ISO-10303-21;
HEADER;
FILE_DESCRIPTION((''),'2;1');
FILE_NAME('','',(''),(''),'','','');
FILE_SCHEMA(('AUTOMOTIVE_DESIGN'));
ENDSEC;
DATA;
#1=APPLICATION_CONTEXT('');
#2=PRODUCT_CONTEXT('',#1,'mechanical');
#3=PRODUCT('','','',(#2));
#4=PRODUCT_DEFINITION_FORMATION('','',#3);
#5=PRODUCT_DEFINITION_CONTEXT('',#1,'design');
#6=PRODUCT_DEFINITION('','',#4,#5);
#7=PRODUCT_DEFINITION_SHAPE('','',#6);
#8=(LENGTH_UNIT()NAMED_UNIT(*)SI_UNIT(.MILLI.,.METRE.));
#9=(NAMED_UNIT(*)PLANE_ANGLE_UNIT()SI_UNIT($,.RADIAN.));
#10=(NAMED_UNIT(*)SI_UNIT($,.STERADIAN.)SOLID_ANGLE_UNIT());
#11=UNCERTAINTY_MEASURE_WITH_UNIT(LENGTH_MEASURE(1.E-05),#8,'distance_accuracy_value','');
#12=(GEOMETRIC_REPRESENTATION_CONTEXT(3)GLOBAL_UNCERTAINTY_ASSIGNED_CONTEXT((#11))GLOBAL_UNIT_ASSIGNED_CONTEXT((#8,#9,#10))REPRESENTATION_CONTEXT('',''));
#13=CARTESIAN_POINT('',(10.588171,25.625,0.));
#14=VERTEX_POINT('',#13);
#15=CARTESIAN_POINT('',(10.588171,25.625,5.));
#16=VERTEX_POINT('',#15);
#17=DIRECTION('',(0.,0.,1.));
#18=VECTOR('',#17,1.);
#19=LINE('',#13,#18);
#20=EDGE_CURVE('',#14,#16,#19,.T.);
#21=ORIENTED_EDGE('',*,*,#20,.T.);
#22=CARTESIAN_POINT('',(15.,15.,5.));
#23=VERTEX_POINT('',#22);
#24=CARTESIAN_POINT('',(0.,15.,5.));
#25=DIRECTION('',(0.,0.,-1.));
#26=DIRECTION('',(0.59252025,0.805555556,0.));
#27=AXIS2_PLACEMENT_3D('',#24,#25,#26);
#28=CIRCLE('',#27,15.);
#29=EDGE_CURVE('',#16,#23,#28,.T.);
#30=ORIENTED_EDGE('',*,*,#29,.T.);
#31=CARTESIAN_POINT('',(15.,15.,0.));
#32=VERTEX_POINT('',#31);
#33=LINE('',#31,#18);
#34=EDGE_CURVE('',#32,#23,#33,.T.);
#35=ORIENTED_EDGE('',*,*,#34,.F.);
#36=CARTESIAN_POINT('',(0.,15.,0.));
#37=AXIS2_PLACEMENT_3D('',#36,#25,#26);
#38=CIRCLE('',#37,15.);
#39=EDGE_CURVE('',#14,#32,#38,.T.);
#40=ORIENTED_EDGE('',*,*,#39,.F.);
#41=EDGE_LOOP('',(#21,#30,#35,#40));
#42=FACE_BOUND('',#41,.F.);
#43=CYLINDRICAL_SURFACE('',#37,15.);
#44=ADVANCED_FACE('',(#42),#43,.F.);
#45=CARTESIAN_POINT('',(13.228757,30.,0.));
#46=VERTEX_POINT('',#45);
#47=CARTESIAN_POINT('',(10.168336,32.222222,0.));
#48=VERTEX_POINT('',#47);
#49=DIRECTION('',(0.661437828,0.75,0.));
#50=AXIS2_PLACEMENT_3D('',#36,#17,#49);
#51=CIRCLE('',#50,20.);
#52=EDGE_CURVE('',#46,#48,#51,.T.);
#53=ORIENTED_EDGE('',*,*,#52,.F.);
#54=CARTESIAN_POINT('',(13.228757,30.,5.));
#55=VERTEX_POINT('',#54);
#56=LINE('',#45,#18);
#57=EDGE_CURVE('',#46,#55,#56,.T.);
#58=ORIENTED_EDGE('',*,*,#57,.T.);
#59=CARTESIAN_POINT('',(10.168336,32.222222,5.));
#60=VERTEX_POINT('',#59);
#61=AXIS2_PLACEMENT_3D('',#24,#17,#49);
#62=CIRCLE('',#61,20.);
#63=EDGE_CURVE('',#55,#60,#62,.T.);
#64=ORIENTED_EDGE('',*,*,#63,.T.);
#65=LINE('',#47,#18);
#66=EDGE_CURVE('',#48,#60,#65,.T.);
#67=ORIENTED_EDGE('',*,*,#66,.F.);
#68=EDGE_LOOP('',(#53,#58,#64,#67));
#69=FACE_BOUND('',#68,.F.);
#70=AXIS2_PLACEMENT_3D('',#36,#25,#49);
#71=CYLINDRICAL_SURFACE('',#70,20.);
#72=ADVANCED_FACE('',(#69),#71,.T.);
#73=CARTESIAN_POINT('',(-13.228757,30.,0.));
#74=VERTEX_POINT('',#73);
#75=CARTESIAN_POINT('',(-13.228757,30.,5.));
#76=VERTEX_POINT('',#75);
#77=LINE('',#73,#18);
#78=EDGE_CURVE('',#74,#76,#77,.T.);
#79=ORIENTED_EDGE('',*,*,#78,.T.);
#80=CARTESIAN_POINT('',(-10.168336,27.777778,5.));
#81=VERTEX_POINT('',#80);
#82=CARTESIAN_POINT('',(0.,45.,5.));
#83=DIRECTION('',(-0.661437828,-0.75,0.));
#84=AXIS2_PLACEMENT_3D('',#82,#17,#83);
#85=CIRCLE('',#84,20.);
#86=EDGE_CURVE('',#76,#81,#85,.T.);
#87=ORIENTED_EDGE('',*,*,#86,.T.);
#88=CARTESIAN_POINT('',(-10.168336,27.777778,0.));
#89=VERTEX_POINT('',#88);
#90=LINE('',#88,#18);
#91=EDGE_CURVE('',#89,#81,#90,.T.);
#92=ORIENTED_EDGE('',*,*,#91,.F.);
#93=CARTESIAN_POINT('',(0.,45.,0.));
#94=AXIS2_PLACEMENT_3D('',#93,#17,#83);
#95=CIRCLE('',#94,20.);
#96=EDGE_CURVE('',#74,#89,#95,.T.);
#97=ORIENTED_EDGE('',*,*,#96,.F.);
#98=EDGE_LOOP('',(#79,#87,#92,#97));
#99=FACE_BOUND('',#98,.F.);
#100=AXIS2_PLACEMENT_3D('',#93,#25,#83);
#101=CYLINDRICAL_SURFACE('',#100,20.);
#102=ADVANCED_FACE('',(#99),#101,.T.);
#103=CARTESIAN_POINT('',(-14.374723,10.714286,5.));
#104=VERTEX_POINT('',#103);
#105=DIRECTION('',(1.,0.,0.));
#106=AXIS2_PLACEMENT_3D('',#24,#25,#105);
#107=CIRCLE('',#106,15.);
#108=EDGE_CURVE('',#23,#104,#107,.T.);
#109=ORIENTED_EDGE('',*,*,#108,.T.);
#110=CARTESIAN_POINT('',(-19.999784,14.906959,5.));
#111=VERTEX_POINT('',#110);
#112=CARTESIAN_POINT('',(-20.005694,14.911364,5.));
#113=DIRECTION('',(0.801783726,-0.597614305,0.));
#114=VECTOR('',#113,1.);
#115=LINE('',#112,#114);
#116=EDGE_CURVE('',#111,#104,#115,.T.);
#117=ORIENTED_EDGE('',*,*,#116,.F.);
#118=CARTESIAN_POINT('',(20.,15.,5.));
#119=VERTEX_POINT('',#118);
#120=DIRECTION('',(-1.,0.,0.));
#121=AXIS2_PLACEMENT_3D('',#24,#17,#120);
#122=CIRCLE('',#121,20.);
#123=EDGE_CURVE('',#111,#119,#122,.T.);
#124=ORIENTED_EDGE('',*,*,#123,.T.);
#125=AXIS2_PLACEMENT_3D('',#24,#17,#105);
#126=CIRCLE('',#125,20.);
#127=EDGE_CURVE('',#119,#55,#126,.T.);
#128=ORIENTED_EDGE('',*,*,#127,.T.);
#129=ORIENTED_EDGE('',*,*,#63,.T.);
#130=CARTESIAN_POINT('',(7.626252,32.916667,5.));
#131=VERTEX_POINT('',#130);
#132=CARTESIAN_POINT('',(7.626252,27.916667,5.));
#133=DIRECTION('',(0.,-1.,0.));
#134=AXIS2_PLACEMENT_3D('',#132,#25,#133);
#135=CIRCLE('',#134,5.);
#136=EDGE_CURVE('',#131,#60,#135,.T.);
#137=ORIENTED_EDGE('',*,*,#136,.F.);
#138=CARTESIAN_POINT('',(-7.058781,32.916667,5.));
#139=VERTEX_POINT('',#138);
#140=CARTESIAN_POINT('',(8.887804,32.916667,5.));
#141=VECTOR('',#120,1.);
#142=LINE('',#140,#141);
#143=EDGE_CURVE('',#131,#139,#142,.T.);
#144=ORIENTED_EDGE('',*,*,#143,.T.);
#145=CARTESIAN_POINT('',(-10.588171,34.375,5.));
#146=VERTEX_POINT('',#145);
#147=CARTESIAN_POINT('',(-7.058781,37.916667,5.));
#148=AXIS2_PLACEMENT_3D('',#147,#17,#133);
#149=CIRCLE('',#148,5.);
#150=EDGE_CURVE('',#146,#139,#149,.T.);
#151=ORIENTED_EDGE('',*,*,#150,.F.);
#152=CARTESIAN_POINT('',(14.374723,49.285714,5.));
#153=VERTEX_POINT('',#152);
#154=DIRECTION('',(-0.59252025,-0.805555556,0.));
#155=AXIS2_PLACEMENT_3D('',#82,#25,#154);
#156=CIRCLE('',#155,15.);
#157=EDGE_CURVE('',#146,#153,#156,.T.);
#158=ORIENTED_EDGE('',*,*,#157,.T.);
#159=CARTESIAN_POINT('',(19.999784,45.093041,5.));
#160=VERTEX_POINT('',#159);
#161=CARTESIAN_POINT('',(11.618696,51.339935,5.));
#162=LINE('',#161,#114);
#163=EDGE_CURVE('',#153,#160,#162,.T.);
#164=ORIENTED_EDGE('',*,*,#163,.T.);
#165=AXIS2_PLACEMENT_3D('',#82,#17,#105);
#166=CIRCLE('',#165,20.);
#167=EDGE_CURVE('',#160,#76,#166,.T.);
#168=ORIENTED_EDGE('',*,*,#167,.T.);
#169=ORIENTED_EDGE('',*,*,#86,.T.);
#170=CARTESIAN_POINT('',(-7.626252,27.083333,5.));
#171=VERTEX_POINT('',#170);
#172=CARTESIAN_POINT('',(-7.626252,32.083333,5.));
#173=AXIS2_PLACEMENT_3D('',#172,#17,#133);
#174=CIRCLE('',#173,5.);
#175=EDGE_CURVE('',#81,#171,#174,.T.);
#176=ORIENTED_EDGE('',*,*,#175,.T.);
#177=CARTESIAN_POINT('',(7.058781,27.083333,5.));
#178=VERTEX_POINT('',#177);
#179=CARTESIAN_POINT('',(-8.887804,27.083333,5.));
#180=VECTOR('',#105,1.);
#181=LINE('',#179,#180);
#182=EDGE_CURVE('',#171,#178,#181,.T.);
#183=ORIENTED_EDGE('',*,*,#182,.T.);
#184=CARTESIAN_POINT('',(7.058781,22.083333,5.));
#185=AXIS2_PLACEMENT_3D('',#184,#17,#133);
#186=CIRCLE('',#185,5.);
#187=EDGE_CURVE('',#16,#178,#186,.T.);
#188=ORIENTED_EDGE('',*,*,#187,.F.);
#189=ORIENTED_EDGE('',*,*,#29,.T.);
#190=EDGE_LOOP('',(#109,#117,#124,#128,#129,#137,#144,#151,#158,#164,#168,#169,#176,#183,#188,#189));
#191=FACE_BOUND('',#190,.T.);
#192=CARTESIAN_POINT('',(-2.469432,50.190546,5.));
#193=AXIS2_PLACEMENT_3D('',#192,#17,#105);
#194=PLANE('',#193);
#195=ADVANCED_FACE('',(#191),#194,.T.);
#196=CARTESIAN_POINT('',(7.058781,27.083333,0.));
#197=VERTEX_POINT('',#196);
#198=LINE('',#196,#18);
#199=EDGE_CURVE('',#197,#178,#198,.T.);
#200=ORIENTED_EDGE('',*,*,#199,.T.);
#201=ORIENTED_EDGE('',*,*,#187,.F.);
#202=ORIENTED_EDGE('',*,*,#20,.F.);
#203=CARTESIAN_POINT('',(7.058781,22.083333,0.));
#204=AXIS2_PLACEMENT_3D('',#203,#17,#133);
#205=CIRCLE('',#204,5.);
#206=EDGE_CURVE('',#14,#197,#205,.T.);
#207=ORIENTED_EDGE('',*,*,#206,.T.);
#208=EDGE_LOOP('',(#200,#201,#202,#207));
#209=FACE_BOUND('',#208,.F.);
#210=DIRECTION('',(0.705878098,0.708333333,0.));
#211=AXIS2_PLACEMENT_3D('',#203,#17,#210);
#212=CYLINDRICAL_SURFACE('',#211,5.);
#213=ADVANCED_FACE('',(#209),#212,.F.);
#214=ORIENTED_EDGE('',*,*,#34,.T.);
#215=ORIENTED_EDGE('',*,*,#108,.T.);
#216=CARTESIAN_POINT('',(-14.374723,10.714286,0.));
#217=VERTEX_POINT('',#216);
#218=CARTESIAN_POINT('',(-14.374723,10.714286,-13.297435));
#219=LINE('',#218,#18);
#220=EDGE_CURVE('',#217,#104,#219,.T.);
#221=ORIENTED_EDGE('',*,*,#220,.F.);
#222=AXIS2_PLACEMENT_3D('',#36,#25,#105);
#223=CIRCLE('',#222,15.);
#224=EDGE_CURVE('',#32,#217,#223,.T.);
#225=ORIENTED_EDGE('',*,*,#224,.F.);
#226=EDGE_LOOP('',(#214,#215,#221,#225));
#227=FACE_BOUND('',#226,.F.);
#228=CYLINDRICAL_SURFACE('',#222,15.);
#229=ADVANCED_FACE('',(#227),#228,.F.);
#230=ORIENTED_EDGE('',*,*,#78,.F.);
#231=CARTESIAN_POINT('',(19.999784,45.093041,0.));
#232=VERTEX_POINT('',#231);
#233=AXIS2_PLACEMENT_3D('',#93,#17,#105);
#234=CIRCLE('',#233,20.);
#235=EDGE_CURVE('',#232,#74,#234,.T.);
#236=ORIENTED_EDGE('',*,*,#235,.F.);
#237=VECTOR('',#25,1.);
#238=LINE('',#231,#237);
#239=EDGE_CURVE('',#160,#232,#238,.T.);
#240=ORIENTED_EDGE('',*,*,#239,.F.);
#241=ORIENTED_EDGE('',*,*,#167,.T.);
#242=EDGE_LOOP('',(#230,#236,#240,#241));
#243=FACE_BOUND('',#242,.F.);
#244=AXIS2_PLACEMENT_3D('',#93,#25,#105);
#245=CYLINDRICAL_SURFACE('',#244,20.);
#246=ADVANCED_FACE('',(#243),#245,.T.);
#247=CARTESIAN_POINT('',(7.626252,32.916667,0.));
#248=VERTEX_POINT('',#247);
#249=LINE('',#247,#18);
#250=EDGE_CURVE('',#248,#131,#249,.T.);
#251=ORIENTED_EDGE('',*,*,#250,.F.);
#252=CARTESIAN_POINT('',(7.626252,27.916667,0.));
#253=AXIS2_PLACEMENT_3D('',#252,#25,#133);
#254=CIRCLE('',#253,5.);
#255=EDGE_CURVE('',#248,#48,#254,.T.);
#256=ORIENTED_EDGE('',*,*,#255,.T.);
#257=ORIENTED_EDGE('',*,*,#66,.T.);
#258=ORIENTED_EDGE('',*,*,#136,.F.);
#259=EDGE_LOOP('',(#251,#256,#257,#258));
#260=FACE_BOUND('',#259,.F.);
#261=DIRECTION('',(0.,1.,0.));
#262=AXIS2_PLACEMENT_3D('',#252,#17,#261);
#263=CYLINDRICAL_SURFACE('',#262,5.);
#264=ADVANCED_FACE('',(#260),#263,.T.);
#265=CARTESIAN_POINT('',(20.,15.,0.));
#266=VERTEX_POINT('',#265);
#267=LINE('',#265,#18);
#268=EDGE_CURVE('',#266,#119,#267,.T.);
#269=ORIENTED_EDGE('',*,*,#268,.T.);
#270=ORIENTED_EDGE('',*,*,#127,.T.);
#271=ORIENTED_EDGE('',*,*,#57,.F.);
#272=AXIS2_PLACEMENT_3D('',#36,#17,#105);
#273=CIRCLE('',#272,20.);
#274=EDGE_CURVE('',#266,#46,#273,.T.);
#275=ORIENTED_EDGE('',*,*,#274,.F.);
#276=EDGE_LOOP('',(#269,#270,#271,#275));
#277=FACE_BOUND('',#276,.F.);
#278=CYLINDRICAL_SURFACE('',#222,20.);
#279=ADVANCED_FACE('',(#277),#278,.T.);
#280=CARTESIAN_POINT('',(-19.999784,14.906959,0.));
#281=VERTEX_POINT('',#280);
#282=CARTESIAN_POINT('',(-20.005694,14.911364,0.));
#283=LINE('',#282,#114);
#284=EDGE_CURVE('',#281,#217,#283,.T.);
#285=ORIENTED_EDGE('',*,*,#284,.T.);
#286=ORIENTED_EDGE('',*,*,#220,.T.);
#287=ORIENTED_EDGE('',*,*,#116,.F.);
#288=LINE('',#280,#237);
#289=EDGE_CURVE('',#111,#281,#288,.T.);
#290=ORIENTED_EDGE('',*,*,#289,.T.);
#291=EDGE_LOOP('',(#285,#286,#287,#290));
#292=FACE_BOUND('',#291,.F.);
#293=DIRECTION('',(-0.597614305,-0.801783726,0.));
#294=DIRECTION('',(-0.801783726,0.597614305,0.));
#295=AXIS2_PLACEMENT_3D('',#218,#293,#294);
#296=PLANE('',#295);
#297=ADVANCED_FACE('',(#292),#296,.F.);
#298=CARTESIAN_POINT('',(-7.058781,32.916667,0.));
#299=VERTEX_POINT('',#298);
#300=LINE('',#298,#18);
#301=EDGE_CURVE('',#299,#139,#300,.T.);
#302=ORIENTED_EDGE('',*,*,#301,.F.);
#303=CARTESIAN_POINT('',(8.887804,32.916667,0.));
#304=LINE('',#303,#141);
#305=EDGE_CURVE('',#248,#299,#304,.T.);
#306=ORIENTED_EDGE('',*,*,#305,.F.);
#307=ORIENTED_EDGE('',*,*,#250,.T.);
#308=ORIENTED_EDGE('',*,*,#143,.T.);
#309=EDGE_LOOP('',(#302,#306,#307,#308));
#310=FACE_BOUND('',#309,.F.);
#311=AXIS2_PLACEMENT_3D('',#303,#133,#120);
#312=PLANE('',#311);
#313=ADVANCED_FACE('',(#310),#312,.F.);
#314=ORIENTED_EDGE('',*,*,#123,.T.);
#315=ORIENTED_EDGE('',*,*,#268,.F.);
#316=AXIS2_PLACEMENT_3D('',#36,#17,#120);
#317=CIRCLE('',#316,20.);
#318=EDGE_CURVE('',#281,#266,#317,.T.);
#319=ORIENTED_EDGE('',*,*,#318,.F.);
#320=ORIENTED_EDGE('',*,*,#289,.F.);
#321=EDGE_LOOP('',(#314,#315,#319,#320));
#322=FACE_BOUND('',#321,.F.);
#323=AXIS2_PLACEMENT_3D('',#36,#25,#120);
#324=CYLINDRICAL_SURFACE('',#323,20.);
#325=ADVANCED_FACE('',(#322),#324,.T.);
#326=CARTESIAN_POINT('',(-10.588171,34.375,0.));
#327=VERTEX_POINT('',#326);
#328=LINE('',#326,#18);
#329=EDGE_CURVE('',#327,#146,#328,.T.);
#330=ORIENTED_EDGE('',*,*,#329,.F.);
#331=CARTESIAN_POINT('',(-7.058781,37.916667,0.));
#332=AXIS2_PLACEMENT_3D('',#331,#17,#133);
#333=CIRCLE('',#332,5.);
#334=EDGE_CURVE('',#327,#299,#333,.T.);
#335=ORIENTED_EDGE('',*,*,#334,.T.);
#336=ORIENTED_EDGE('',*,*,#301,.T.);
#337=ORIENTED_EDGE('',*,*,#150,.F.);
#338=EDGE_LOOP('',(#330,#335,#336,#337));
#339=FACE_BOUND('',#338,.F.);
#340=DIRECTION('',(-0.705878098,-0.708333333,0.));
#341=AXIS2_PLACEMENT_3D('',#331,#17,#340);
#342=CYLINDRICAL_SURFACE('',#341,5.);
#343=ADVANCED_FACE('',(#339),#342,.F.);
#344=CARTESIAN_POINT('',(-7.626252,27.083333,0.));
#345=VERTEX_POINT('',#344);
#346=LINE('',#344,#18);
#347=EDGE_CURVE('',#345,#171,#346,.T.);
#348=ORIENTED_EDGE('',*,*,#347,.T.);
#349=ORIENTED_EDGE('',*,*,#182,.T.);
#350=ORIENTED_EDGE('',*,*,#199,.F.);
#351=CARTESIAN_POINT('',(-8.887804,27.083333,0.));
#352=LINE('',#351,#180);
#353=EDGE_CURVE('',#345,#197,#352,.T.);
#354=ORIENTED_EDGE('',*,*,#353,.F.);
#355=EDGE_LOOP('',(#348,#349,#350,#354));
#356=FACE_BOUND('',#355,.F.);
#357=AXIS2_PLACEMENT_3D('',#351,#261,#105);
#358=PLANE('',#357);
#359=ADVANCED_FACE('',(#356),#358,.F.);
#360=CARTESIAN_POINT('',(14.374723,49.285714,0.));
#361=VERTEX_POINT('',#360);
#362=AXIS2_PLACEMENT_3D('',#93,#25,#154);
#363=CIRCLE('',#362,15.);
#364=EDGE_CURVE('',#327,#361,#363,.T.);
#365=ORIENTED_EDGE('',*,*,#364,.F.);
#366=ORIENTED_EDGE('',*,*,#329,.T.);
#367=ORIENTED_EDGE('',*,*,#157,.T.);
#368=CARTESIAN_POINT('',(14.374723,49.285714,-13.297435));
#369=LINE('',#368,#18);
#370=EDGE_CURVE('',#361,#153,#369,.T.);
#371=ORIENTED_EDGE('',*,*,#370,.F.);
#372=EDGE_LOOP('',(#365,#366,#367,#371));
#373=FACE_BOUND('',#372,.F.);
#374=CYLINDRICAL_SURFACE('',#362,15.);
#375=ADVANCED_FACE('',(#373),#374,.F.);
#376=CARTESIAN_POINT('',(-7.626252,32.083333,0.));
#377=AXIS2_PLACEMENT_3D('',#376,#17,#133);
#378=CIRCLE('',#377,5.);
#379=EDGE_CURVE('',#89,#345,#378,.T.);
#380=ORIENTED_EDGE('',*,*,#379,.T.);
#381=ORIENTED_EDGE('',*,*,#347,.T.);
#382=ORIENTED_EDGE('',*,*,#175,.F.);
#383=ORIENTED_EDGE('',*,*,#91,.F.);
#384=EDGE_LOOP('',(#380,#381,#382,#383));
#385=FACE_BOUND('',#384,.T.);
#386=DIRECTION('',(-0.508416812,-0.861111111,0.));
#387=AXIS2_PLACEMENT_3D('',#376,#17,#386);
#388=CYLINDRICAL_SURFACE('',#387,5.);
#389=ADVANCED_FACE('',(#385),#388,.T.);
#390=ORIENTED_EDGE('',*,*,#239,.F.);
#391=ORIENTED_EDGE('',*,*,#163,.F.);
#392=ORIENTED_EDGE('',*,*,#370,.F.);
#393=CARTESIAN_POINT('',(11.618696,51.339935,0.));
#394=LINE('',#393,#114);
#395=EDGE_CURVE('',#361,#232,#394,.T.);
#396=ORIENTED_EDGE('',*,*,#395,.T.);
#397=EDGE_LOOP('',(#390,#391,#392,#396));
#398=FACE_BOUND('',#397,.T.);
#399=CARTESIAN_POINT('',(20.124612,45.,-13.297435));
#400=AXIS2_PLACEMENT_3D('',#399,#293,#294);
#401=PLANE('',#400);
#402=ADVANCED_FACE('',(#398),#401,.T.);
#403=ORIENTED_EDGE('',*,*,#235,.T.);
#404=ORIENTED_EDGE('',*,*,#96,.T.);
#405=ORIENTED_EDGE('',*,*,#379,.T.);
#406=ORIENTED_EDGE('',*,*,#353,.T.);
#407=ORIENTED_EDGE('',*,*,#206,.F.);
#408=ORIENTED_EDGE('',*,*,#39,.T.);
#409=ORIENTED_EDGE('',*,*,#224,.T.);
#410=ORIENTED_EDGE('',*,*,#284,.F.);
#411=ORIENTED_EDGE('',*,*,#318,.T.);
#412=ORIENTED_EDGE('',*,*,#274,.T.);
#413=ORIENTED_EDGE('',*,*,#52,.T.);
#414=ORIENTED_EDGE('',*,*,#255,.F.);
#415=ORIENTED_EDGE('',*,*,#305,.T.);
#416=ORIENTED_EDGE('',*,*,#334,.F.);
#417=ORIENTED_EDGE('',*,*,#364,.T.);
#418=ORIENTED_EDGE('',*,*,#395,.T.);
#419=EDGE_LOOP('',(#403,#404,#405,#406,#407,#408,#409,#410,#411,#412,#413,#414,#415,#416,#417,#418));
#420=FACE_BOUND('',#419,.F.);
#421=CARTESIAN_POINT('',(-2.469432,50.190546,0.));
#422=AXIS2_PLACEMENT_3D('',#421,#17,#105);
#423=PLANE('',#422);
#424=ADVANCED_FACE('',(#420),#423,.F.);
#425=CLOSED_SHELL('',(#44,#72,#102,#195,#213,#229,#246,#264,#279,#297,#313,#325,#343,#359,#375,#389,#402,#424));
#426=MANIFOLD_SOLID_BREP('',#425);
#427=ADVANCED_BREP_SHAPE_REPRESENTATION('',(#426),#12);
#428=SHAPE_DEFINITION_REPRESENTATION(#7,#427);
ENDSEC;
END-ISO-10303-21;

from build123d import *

# Parameters (mm, degrees)
F1_DEPTH    = 5
F2_T1_DEPTH = 31.594870106
F3_R        = 5


# Not quite as in the source:
# - a fillet or chamfer that OpenCascade refuses, or shapes differently, is made with other operations: its cross-section is extruded or revolved along the edge and cut away or added


with BuildPart() as f1:
    # F0 (on Top) → F1 (new body)
    with BuildSketch(Plane.XY):
        with BuildLine():
            ThreePointArc((20, 45), (-8.2287565553, 63.2287565553), (-13.2287565553, 30))
            ThreePointArc((-13.2287565553, 30), (-11.1540260033, 31.6008344344), (-8.8878037532, 32.9166666667))
            ThreePointArc((-8.8878037532, 32.9166666667), (-14.2521928137, 49.6770717335), (0, 60))
            ThreePointArc((0, 60), (10.6066017178, 55.6066017178), (15, 45))
            Line((15, 45), (20, 45))
        make_face()
        with BuildLine():
            ThreePointArc((-13.2287565553, 30), (-11.1540260033, 28.3991655656), (-8.8878037532, 27.0833333333))
            ThreePointArc((-8.8878037532, 27.0833333333), (-4.6770717335, 29.2521928137), (0, 30))
            ThreePointArc((0, 30), (-4.6770717335, 30.7478071863), (-8.8878037532, 32.9166666667))
            ThreePointArc((-8.8878037532, 32.9166666667), (-11.1540260033, 31.6008344344), (-13.2287565553, 30))
        make_face()
        with BuildLine():
            ThreePointArc((-8.8878037532, 32.9166666667), (-4.6770717335, 30.7478071863), (0, 30))
            Line((0, 30), (0, 32.9166666667))
            Line((0, 32.9166666667), (-8.8878037532, 32.9166666667))
        make_face()
        with BuildLine():
            ThreePointArc((0, 30), (-4.6770717335, 29.2521928137), (-8.8878037532, 27.0833333333))
            Line((-8.8878037532, 27.0833333333), (0, 27.0833333333))
            Line((0, 27.0833333333), (0, 30))
        make_face()
        with BuildLine():
            Line((0, 27.0833333333), (8.8878037532, 27.0833333333))
            ThreePointArc((8.8878037532, 27.0833333333), (4.6770717335, 29.2521928137), (0, 30))
            Line((0, 30), (0, 27.0833333333))
        make_face()
        with BuildLine():
            Line((0, 32.9166666667), (0, 30))
            ThreePointArc((0, 30), (4.6770717335, 30.7478071863), (8.8878037532, 32.9166666667))
            Line((8.8878037532, 32.9166666667), (0, 32.9166666667))
        make_face()
        with BuildLine():
            ThreePointArc((0, 30), (4.6770717335, 29.2521928137), (8.8878037532, 27.0833333333))
            ThreePointArc((8.8878037532, 27.0833333333), (11.1540260033, 28.3991655656), (13.2287565553, 30))
            ThreePointArc((13.2287565553, 30), (11.1540260033, 31.6008344344), (8.8878037532, 32.9166666667))
            ThreePointArc((8.8878037532, 32.9166666667), (4.6770717335, 30.7478071863), (0, 30))
        make_face()
        with BuildLine():
            ThreePointArc((15, 15), (10.6066017178, 4.3933982822), (0, 0))
            ThreePointArc((0, 0), (-10.6066017178, 4.3933982822), (-15, 15))
            Line((-15, 15), (-20, 15))
            ThreePointArc((-20, 15), (0, -5), (20, 15))
            ThreePointArc((20, 15), (18.2287565553, 23.2287565553), (13.2287565553, 30))
            ThreePointArc((13.2287565553, 30), (11.1540260033, 28.3991655656), (8.8878037532, 27.0833333333))
            ThreePointArc((8.8878037532, 27.0833333333), (13.3850113242, 21.7706330465), (15, 15))
        make_face()
    extrude(amount=F1_DEPTH)

    # F2: chamfer of 6 on 2 edges, made by hand

    # F2_s2 → F2_t1 (cut)
    with BuildSketch(Plane.XY.offset(-13.297435053)):
        with BuildLine():
            Line((-14.3747227125, 10.7142857143), (-20.1246117975, 15))
            Line((-20.1246117975, 15), (-15, 15))
            ThreePointArc((-15, 15), (-14.830161389, 12.7491527872), (-14.3747227125, 10.7142857143))
        make_face()
        with BuildLine():
            Line((20.1246117975, 45), (14.3747227125, 49.2857142857))
            ThreePointArc((14.3747227125, 49.2857142857), (14.830161389, 47.2508472128), (15, 45))
            Line((15, 45), (20.1246117975, 45))
        make_face()
    extrude(amount=F2_T1_DEPTH, mode=Mode.SUBTRACT)

    # F3
    f3_edges = [f1.edges().sort_by_distance(p)[0] for p in [
        (-8.887804, 32.916667, 2.5),
        (8.887804, 27.083333, 2.5),
        (8.887804, 32.916667, 2.5),
        (-8.887804, 27.083333, 2.5),
    ]]
    fillet(f3_edges, radius=F3_R)


solid = f1.part
